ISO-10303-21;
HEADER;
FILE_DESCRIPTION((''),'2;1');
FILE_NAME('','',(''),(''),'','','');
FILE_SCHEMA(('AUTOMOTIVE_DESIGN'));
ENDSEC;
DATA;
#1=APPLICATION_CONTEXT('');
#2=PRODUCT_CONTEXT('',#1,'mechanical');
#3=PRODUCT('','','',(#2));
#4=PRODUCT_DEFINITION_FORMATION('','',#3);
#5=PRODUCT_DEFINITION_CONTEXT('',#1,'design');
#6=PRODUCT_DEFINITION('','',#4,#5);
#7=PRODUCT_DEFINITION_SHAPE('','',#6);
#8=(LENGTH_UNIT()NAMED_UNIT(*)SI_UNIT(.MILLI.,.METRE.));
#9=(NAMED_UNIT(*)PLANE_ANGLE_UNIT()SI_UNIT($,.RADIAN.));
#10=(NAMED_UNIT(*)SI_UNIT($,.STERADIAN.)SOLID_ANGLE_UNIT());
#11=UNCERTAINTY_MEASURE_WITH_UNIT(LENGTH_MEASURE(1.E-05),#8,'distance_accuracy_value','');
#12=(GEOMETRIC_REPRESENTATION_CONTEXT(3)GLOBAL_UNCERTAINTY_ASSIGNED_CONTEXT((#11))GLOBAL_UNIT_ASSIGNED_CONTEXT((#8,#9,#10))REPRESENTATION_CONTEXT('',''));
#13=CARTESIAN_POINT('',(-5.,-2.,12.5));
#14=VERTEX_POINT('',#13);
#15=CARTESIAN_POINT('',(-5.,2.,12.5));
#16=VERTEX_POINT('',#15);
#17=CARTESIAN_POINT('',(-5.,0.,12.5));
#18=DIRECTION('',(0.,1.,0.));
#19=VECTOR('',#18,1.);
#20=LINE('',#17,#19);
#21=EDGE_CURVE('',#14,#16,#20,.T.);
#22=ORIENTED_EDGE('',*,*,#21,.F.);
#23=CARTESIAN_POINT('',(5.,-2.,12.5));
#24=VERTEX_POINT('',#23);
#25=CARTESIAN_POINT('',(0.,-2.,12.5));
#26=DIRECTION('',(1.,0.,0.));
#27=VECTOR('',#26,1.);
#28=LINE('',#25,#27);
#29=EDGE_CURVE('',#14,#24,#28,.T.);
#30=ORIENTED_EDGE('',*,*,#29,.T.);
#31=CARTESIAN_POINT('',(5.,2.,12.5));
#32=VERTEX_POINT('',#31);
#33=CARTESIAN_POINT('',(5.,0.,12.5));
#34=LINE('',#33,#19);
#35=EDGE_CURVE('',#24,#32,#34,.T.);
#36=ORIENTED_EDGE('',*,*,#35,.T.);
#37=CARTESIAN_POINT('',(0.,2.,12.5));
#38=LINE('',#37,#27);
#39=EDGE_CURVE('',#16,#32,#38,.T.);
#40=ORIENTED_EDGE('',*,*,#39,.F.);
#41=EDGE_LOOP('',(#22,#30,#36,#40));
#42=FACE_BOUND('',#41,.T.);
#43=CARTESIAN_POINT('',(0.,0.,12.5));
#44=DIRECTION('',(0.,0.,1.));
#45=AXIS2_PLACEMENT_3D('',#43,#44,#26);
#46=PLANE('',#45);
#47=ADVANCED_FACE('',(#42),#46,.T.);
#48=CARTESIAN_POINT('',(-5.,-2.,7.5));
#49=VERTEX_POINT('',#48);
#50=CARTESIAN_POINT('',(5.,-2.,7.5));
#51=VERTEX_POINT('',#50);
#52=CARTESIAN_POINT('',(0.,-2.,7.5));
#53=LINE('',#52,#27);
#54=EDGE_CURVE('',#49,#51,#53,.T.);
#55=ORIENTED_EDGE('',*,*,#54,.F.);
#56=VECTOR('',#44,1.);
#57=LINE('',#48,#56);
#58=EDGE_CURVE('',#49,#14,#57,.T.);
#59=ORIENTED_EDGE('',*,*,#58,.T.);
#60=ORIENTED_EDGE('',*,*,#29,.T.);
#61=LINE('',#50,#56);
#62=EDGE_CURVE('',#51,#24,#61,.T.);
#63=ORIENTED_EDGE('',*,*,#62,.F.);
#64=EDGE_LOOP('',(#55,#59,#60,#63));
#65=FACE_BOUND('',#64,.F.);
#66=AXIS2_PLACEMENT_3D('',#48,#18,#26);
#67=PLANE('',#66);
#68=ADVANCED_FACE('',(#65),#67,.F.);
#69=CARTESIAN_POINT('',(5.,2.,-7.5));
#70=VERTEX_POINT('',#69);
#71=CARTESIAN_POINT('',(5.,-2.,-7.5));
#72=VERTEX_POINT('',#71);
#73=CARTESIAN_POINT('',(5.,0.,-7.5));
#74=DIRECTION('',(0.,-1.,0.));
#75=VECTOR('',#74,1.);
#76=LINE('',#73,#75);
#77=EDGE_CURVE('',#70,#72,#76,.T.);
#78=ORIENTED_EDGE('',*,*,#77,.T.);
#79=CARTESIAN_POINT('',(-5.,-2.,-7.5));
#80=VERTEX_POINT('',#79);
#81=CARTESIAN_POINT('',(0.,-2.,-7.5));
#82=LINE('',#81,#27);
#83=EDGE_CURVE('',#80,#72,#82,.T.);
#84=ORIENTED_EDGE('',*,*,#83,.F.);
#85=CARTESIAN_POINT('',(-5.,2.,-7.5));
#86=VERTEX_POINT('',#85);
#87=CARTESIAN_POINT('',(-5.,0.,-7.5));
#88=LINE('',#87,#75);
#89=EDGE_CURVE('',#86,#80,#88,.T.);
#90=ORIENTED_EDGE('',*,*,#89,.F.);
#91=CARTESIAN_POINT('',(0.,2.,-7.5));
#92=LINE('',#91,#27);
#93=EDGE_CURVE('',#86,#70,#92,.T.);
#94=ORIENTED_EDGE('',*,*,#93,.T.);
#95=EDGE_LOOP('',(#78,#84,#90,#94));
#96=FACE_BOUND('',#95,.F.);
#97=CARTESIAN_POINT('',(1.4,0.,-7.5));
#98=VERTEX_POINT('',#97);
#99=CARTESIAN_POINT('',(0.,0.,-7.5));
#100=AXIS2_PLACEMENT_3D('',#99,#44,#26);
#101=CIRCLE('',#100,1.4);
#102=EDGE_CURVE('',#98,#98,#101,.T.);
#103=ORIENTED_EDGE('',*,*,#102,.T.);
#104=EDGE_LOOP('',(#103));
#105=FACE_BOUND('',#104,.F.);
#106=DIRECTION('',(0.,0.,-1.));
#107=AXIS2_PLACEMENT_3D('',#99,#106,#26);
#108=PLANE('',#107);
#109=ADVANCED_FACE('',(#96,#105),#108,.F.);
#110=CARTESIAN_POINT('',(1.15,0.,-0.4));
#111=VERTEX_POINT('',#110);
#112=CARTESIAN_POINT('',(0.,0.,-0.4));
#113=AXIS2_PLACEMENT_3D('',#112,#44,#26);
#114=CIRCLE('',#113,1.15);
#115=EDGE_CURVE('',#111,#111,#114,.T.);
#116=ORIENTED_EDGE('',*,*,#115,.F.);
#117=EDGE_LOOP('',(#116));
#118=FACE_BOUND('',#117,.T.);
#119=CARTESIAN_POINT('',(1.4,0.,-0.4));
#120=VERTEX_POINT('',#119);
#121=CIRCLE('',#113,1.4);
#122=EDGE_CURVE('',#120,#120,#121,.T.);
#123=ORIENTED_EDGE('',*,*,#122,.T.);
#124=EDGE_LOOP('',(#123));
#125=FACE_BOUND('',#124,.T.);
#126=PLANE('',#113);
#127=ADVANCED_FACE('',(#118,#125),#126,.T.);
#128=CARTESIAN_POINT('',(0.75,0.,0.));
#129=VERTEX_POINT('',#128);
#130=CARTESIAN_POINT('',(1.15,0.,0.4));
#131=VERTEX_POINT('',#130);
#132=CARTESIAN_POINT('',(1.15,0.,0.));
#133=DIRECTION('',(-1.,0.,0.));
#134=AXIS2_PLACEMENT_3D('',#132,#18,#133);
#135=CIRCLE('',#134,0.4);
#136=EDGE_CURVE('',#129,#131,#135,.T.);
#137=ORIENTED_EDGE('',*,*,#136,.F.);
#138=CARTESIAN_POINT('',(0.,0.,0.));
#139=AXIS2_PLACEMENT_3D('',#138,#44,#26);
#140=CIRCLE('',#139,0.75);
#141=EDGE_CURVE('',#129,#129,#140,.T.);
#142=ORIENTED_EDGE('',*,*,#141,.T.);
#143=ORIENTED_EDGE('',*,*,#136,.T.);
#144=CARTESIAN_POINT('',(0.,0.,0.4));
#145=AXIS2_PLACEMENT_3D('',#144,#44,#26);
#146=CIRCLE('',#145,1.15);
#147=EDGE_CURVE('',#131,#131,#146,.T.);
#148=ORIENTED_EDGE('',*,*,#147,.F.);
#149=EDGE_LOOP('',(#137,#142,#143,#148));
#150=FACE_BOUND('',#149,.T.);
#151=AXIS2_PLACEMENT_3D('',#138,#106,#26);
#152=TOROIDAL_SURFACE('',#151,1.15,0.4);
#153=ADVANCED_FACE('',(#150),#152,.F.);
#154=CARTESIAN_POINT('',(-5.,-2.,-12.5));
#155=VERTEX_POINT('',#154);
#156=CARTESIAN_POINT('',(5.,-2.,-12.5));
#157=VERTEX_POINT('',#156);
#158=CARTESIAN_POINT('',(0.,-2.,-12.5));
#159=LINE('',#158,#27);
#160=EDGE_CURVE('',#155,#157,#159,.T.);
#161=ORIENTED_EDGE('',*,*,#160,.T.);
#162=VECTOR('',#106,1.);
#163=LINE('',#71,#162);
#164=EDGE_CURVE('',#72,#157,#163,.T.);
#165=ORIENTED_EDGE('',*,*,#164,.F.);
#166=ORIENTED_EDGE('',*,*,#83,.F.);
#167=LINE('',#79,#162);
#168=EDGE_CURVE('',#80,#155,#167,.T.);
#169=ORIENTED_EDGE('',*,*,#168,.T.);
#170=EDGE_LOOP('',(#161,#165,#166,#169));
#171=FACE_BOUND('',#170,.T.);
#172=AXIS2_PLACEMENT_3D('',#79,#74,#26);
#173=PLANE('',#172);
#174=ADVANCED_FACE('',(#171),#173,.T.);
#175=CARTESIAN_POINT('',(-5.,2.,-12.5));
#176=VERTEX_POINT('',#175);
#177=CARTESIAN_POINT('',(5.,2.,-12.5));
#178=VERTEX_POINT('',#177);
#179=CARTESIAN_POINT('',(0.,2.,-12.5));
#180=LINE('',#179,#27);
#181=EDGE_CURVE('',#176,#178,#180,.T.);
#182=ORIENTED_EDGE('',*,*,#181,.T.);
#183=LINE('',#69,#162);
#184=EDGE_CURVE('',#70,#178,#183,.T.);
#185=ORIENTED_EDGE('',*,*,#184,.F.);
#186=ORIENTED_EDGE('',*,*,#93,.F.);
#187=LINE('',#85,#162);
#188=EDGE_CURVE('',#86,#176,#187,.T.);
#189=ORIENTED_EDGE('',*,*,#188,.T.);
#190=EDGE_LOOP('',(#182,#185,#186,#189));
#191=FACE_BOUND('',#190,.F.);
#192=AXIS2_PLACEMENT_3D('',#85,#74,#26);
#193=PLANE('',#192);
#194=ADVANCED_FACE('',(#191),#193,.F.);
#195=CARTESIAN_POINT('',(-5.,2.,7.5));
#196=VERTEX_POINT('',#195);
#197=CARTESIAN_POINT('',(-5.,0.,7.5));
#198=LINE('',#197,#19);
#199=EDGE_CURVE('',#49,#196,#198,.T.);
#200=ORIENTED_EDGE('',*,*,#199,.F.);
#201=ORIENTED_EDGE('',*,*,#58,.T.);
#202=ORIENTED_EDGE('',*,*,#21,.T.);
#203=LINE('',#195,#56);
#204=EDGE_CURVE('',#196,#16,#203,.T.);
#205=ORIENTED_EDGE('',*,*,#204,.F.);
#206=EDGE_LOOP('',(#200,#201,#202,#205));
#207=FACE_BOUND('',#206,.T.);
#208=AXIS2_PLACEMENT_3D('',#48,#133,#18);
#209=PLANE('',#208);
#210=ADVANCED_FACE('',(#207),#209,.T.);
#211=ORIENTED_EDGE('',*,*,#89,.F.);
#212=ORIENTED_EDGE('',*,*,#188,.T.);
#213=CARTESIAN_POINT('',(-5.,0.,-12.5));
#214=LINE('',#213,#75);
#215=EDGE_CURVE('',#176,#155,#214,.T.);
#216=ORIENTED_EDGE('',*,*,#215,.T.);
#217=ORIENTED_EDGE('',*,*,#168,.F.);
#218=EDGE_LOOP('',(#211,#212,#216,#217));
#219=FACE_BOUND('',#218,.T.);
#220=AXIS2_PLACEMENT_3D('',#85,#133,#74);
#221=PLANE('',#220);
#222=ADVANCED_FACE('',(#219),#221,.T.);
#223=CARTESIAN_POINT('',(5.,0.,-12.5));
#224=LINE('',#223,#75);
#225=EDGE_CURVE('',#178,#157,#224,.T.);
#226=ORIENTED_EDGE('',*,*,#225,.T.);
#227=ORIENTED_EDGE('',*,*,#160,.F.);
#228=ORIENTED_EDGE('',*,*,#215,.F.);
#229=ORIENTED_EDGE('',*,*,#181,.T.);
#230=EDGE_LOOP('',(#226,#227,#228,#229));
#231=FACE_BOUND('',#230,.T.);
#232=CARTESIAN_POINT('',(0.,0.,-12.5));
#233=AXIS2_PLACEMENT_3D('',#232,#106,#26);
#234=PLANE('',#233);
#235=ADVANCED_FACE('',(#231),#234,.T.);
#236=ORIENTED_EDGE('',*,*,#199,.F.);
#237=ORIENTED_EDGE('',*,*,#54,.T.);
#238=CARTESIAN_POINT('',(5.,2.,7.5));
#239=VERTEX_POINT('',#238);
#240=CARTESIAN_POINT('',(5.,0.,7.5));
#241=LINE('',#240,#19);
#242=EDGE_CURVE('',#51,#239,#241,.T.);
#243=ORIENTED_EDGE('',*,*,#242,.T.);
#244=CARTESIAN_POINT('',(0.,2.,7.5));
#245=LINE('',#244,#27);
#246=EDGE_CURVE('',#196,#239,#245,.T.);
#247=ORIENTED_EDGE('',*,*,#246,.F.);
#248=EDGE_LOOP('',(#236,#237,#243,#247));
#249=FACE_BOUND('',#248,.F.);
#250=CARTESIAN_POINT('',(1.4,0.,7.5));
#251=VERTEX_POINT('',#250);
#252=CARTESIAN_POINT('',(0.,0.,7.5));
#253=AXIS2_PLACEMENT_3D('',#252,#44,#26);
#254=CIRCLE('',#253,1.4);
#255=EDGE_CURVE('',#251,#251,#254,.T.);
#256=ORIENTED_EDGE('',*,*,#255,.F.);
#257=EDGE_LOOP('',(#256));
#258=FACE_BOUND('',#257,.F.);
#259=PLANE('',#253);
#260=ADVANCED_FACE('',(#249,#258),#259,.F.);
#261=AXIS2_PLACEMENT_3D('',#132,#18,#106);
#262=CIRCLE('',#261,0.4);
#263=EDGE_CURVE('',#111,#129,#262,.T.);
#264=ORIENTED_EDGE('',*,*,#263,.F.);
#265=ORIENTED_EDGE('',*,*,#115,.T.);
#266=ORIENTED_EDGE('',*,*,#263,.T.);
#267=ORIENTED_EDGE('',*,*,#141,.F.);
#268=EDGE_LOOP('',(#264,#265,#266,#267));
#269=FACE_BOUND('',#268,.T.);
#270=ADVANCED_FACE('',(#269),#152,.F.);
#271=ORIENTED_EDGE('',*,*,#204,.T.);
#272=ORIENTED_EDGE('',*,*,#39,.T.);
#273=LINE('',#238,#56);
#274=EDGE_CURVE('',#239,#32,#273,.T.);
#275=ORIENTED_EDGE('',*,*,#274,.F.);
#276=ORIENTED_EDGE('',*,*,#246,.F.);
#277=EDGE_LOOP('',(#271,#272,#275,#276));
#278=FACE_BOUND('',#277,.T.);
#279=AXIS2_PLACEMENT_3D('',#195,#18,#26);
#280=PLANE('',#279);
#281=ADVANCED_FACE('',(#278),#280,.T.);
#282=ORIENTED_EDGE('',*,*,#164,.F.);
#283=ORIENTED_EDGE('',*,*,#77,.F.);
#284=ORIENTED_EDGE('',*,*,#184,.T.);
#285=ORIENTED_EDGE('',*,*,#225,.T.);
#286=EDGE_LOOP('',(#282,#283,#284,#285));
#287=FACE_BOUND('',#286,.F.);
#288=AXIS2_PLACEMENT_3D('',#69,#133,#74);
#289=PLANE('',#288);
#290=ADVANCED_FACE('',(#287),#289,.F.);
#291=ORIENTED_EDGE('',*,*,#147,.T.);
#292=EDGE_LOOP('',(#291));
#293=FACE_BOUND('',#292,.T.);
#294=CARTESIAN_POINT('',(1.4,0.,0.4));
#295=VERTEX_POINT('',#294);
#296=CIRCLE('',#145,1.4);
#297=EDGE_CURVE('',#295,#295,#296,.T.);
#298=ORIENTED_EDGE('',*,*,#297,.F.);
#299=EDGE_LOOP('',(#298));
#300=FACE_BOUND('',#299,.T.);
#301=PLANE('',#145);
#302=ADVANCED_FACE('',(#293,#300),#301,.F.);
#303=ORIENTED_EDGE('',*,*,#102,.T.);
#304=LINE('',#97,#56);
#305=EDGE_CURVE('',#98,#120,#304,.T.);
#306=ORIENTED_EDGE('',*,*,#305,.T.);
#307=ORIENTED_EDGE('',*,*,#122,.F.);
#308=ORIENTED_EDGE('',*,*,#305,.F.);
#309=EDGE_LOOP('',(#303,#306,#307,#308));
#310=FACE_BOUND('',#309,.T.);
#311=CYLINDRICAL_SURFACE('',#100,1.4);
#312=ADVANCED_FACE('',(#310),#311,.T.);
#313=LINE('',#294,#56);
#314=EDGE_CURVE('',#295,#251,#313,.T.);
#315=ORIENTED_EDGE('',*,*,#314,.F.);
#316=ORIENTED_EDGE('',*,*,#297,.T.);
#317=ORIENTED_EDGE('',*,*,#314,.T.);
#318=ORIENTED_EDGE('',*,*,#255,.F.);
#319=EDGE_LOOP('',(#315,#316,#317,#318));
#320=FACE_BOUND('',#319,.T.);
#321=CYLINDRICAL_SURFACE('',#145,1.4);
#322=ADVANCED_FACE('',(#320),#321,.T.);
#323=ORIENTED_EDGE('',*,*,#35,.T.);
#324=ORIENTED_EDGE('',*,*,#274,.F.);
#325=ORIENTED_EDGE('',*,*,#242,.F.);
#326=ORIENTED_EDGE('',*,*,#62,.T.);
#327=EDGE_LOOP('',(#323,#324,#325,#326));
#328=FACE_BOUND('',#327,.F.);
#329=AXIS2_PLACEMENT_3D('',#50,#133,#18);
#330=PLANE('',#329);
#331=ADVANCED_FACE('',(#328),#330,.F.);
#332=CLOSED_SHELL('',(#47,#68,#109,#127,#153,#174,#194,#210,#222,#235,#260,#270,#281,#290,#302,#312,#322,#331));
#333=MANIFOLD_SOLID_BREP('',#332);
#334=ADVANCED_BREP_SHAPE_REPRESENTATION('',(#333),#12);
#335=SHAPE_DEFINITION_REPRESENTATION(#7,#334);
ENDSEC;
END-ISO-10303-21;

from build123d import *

# Parameters (mm, degrees)
F2_W     = 10
F2_H     = 4
F2_R     = 1.4
F3_DEPTH = 5
F4_W     = 10
F4_H     = 4
F4_R     = 1.4
F5_DEPTH = 5


with BuildPart() as f1:
    # F0 (on Front) → F1 (revolve)
    with BuildSketch(Plane.XZ):
        with BuildLine():
            Line((1.4, 7.5), (0, 7.5))
            Line((0, 7.5), (0, 0))
            Line((0, 0), (0, -7.5))
            Line((0, -7.5), (1.4, -7.5))
            Line((1.4, -7.5), (1.4, -0.4))
            Line((1.4, -0.4), (1.15, -0.4))
            ThreePointArc((1.15, -0.4), (0.8671572875, -0.2828427125), (0.75, 0))
            ThreePointArc((0.75, 0), (0.8671572875, 0.2828427125), (1.15, 0.4))
            Line((1.15, 0.4), (1.4, 0.4))
            Line((1.4, 0.4), (1.4, 7.5))
        make_face()
    revolve(axis=Axis((0, 0, 3.75), (0, 0, 1)))

    # F2 (on face) → F3 (join)
    with BuildSketch(Plane.XY.offset(7.5)):
        Rectangle(F2_W, F2_H)
        Circle(F2_R, mode=Mode.SUBTRACT)
        Circle(F2_R)
    extrude(amount=F3_DEPTH)

    # F4 (on face) → F5 (join)
    with BuildSketch(Plane(origin=(0, 0, -7.5), x_dir=(1, 0, 0), z_dir=(0, 0, -1))):
        Rectangle(F4_W, F4_H)
        Circle(F4_R, mode=Mode.SUBTRACT)
        Circle(F4_R)
    extrude(amount=F5_DEPTH)


solid = f1.part
